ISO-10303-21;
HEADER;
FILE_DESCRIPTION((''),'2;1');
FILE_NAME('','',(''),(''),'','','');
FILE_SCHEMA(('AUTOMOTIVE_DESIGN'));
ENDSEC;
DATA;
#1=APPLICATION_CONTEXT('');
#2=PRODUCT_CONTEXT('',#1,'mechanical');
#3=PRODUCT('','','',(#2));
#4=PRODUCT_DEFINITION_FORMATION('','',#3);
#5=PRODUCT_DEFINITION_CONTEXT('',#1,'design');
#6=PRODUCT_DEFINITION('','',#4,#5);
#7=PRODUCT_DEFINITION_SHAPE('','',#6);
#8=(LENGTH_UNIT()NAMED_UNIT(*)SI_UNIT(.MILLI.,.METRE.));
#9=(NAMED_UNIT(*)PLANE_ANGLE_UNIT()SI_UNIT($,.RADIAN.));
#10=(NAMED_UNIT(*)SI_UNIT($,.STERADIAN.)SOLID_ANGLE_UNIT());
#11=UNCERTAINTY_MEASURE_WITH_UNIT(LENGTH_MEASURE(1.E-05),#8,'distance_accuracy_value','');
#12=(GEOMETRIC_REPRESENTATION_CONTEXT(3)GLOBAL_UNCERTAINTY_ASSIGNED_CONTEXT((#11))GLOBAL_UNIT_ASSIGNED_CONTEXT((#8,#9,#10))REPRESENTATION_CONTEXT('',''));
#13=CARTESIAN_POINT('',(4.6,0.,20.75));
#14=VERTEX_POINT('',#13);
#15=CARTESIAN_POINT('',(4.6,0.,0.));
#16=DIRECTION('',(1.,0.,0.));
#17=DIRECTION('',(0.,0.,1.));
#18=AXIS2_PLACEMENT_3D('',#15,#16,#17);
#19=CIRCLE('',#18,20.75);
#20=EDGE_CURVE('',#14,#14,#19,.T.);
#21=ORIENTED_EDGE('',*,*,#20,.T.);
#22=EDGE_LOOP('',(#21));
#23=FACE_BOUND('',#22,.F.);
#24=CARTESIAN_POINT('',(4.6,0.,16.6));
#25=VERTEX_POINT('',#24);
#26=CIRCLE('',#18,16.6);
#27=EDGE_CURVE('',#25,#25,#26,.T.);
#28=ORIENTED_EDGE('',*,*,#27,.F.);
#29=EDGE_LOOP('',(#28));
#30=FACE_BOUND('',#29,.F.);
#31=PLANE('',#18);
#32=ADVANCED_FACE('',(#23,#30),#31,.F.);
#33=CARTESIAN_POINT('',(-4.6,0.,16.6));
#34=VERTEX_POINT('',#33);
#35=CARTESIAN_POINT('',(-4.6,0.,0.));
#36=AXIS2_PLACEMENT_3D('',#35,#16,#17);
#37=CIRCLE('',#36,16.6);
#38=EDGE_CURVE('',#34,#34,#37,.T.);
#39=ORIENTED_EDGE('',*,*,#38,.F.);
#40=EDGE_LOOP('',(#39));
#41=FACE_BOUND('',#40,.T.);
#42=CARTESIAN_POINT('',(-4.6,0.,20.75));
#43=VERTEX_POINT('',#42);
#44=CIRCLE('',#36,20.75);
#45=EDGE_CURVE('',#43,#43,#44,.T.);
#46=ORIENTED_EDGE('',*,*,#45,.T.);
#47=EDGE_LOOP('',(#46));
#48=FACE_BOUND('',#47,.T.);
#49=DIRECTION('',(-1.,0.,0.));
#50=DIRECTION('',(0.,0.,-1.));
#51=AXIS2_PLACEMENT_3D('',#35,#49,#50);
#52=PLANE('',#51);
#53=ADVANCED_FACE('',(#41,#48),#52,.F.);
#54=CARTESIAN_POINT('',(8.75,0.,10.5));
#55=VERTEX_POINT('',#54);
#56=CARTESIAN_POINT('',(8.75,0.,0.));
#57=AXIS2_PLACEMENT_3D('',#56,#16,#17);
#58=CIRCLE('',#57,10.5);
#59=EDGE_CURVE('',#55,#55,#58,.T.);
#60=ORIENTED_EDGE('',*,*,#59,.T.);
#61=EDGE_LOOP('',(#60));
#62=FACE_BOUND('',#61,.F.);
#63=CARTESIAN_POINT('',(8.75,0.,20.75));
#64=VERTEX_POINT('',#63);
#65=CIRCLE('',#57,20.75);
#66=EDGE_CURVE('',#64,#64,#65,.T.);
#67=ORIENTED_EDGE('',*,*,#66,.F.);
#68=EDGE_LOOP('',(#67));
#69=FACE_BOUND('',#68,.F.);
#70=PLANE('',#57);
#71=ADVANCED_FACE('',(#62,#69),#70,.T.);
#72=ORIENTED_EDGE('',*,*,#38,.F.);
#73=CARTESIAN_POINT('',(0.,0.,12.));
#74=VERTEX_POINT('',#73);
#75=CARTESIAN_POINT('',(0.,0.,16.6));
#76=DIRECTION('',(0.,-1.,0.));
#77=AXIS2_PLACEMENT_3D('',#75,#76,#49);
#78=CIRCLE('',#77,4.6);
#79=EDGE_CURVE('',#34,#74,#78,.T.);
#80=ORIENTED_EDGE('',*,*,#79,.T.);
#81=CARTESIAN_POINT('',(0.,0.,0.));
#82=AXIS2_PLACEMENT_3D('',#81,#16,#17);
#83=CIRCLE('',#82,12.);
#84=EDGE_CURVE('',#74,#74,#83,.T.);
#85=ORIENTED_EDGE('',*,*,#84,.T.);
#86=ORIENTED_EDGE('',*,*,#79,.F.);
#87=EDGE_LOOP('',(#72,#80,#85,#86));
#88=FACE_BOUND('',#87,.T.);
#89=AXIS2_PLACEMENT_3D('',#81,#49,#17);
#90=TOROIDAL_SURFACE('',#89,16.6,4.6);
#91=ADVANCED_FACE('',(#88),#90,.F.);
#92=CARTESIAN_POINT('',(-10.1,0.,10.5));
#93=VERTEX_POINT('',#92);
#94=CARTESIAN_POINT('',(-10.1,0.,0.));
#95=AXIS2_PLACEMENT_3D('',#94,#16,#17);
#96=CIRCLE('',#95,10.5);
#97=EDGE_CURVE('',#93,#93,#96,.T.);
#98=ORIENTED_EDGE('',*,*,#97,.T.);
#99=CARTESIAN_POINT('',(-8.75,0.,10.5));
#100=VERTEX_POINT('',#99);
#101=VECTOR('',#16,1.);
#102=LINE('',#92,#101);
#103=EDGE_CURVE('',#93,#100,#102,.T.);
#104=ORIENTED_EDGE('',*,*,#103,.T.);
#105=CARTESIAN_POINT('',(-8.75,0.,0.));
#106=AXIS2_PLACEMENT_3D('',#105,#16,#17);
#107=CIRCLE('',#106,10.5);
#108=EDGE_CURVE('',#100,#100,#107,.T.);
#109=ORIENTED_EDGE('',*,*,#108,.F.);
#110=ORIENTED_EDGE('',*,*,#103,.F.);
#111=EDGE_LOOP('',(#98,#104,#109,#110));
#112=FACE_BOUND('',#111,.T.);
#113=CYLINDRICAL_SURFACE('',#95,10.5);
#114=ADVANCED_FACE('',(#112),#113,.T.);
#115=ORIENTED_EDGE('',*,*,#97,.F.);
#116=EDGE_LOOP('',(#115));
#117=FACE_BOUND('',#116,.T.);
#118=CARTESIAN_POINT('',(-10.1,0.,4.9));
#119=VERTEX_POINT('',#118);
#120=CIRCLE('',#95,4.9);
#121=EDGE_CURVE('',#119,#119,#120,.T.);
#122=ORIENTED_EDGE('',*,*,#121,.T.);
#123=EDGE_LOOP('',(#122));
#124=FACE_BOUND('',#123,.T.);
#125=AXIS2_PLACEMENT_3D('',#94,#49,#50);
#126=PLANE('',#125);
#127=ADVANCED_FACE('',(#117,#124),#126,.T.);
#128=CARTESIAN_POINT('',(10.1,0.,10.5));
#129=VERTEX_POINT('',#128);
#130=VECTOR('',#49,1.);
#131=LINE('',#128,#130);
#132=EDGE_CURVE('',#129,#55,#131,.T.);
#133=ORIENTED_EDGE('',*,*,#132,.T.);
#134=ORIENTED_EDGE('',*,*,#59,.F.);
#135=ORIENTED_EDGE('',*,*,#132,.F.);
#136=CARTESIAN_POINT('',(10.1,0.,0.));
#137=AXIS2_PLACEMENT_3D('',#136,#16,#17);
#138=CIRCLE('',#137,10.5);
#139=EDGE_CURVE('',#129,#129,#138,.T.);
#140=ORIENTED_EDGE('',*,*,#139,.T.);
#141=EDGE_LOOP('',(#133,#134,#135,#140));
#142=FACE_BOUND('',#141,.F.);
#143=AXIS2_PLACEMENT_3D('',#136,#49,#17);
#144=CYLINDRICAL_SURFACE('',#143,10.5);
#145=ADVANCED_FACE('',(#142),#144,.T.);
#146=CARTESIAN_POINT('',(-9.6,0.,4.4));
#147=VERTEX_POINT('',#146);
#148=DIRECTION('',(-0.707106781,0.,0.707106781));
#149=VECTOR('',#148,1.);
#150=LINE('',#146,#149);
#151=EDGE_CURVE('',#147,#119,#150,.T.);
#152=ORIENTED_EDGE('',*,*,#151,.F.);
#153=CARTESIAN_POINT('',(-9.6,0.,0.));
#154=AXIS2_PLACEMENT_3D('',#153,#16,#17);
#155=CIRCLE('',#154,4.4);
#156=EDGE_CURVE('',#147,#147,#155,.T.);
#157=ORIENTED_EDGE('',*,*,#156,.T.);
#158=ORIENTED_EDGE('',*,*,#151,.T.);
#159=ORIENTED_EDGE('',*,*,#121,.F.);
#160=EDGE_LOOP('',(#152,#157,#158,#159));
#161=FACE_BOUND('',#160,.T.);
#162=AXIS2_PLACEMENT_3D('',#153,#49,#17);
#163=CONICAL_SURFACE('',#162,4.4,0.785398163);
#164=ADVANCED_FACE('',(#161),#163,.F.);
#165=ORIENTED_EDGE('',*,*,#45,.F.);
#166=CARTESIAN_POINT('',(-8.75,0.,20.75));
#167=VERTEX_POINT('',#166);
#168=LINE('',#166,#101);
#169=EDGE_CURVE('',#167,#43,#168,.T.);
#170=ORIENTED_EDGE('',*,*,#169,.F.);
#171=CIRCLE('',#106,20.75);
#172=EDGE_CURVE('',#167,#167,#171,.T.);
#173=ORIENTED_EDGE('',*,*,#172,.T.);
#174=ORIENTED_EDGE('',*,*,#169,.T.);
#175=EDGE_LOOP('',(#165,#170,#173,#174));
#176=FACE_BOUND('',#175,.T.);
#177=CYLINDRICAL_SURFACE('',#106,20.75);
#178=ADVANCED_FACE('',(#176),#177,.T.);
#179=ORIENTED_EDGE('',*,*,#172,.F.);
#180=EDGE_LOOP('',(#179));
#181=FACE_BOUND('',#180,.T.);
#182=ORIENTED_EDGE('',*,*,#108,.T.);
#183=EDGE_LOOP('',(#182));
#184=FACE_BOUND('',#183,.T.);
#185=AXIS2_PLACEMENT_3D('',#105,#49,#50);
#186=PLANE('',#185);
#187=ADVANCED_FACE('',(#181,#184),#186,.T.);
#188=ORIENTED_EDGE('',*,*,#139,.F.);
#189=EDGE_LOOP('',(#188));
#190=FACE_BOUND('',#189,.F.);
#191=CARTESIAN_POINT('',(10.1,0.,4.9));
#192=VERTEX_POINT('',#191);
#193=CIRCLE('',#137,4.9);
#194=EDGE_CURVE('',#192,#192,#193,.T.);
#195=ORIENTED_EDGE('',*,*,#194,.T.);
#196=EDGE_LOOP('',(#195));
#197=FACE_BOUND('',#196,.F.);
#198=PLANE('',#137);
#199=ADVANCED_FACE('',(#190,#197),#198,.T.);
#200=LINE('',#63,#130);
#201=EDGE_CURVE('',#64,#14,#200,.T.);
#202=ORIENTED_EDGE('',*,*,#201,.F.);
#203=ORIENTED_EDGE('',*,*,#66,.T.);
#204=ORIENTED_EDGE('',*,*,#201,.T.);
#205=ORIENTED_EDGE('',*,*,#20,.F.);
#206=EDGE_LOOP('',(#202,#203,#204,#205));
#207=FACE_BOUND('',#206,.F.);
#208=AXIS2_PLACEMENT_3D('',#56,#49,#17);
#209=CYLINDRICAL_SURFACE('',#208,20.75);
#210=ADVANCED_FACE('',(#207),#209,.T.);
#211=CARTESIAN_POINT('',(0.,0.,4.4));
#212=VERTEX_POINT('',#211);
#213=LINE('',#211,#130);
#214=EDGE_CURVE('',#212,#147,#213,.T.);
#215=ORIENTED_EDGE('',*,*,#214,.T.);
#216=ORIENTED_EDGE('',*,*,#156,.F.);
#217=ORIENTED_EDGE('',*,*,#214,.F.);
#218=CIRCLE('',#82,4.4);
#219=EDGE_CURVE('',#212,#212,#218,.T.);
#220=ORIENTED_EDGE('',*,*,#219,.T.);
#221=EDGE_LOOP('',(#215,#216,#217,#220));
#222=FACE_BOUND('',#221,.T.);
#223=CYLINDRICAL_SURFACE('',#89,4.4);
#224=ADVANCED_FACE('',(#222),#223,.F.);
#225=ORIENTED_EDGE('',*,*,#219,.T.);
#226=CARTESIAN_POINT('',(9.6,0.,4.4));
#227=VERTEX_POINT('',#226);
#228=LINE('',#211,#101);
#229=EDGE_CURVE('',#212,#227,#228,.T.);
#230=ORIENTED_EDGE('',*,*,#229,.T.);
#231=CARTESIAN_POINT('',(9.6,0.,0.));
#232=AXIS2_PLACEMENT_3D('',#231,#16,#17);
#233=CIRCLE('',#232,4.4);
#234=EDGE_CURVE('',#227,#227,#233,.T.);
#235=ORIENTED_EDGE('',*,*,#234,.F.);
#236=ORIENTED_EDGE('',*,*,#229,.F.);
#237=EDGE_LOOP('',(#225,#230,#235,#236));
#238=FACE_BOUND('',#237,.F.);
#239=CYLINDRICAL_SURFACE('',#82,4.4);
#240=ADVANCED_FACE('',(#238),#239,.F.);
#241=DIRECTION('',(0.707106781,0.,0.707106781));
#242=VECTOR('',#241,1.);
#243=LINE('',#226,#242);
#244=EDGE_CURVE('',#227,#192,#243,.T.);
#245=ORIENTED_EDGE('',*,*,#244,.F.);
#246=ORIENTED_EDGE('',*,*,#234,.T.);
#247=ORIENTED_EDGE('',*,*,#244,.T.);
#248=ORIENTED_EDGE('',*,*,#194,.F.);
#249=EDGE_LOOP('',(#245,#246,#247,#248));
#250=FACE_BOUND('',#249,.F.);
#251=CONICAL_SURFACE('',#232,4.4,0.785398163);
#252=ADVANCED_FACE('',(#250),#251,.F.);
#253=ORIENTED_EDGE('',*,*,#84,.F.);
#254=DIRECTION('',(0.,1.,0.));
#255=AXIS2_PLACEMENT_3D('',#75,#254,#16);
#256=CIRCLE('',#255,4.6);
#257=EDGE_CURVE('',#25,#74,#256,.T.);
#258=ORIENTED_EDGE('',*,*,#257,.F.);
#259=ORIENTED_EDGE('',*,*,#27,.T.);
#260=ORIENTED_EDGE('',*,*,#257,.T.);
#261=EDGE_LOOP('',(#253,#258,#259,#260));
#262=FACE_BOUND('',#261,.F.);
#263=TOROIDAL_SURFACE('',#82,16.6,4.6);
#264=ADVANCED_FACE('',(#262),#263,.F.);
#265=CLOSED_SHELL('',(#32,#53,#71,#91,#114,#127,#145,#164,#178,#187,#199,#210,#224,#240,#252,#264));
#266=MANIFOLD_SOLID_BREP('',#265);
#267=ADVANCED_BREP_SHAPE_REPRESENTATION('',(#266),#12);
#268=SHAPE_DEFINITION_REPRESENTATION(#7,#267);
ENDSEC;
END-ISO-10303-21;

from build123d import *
from build123d import SkipClean  # not in build123d's __all__

# Parameters (mm, degrees)
F3_SIZE = 0.5


with BuildPart() as f1:
    # F0 (on Front) → F1 (revolve)
    with BuildSketch(Plane.XZ):
        with BuildLine():
            Line((0, 4.4), (10.1, 4.4))
            Line((10.1, 4.4), (10.1, 10.5))
            Line((10.1, 10.5), (8.75, 10.5))
            Line((8.75, 10.5), (8.75, 20.75))
            Line((8.75, 20.75), (4.6, 20.75))
            Line((4.6, 20.75), (4.6, 16.6))
            ThreePointArc((4.6, 16.6), (3.2526911935, 13.3473088065), (0, 12))
            Line((0, 12), (0, 4.4))
        make_face()
    revolve(axis=Axis((5.05, 0, 0), (1, 0, 0)))

    # F2: F1 across plane


with BuildPart() as f1_1:
    add(f1.part, clean=False)
    with SkipClean():  # cleaning this boolean's faces spoils the solid; the shape is the same uncleaned
        add(f1.part.mirror(Plane.YZ), clean=False)

    # F3
    f3_edges = [f1_1.edges().sort_by_distance(p)[0] for p in [
        (10.1, 0, -4.4),
        (-10.1, 0, -4.4),
    ]]
    chamfer(f3_edges, length=F3_SIZE)


solid = f1_1.part
